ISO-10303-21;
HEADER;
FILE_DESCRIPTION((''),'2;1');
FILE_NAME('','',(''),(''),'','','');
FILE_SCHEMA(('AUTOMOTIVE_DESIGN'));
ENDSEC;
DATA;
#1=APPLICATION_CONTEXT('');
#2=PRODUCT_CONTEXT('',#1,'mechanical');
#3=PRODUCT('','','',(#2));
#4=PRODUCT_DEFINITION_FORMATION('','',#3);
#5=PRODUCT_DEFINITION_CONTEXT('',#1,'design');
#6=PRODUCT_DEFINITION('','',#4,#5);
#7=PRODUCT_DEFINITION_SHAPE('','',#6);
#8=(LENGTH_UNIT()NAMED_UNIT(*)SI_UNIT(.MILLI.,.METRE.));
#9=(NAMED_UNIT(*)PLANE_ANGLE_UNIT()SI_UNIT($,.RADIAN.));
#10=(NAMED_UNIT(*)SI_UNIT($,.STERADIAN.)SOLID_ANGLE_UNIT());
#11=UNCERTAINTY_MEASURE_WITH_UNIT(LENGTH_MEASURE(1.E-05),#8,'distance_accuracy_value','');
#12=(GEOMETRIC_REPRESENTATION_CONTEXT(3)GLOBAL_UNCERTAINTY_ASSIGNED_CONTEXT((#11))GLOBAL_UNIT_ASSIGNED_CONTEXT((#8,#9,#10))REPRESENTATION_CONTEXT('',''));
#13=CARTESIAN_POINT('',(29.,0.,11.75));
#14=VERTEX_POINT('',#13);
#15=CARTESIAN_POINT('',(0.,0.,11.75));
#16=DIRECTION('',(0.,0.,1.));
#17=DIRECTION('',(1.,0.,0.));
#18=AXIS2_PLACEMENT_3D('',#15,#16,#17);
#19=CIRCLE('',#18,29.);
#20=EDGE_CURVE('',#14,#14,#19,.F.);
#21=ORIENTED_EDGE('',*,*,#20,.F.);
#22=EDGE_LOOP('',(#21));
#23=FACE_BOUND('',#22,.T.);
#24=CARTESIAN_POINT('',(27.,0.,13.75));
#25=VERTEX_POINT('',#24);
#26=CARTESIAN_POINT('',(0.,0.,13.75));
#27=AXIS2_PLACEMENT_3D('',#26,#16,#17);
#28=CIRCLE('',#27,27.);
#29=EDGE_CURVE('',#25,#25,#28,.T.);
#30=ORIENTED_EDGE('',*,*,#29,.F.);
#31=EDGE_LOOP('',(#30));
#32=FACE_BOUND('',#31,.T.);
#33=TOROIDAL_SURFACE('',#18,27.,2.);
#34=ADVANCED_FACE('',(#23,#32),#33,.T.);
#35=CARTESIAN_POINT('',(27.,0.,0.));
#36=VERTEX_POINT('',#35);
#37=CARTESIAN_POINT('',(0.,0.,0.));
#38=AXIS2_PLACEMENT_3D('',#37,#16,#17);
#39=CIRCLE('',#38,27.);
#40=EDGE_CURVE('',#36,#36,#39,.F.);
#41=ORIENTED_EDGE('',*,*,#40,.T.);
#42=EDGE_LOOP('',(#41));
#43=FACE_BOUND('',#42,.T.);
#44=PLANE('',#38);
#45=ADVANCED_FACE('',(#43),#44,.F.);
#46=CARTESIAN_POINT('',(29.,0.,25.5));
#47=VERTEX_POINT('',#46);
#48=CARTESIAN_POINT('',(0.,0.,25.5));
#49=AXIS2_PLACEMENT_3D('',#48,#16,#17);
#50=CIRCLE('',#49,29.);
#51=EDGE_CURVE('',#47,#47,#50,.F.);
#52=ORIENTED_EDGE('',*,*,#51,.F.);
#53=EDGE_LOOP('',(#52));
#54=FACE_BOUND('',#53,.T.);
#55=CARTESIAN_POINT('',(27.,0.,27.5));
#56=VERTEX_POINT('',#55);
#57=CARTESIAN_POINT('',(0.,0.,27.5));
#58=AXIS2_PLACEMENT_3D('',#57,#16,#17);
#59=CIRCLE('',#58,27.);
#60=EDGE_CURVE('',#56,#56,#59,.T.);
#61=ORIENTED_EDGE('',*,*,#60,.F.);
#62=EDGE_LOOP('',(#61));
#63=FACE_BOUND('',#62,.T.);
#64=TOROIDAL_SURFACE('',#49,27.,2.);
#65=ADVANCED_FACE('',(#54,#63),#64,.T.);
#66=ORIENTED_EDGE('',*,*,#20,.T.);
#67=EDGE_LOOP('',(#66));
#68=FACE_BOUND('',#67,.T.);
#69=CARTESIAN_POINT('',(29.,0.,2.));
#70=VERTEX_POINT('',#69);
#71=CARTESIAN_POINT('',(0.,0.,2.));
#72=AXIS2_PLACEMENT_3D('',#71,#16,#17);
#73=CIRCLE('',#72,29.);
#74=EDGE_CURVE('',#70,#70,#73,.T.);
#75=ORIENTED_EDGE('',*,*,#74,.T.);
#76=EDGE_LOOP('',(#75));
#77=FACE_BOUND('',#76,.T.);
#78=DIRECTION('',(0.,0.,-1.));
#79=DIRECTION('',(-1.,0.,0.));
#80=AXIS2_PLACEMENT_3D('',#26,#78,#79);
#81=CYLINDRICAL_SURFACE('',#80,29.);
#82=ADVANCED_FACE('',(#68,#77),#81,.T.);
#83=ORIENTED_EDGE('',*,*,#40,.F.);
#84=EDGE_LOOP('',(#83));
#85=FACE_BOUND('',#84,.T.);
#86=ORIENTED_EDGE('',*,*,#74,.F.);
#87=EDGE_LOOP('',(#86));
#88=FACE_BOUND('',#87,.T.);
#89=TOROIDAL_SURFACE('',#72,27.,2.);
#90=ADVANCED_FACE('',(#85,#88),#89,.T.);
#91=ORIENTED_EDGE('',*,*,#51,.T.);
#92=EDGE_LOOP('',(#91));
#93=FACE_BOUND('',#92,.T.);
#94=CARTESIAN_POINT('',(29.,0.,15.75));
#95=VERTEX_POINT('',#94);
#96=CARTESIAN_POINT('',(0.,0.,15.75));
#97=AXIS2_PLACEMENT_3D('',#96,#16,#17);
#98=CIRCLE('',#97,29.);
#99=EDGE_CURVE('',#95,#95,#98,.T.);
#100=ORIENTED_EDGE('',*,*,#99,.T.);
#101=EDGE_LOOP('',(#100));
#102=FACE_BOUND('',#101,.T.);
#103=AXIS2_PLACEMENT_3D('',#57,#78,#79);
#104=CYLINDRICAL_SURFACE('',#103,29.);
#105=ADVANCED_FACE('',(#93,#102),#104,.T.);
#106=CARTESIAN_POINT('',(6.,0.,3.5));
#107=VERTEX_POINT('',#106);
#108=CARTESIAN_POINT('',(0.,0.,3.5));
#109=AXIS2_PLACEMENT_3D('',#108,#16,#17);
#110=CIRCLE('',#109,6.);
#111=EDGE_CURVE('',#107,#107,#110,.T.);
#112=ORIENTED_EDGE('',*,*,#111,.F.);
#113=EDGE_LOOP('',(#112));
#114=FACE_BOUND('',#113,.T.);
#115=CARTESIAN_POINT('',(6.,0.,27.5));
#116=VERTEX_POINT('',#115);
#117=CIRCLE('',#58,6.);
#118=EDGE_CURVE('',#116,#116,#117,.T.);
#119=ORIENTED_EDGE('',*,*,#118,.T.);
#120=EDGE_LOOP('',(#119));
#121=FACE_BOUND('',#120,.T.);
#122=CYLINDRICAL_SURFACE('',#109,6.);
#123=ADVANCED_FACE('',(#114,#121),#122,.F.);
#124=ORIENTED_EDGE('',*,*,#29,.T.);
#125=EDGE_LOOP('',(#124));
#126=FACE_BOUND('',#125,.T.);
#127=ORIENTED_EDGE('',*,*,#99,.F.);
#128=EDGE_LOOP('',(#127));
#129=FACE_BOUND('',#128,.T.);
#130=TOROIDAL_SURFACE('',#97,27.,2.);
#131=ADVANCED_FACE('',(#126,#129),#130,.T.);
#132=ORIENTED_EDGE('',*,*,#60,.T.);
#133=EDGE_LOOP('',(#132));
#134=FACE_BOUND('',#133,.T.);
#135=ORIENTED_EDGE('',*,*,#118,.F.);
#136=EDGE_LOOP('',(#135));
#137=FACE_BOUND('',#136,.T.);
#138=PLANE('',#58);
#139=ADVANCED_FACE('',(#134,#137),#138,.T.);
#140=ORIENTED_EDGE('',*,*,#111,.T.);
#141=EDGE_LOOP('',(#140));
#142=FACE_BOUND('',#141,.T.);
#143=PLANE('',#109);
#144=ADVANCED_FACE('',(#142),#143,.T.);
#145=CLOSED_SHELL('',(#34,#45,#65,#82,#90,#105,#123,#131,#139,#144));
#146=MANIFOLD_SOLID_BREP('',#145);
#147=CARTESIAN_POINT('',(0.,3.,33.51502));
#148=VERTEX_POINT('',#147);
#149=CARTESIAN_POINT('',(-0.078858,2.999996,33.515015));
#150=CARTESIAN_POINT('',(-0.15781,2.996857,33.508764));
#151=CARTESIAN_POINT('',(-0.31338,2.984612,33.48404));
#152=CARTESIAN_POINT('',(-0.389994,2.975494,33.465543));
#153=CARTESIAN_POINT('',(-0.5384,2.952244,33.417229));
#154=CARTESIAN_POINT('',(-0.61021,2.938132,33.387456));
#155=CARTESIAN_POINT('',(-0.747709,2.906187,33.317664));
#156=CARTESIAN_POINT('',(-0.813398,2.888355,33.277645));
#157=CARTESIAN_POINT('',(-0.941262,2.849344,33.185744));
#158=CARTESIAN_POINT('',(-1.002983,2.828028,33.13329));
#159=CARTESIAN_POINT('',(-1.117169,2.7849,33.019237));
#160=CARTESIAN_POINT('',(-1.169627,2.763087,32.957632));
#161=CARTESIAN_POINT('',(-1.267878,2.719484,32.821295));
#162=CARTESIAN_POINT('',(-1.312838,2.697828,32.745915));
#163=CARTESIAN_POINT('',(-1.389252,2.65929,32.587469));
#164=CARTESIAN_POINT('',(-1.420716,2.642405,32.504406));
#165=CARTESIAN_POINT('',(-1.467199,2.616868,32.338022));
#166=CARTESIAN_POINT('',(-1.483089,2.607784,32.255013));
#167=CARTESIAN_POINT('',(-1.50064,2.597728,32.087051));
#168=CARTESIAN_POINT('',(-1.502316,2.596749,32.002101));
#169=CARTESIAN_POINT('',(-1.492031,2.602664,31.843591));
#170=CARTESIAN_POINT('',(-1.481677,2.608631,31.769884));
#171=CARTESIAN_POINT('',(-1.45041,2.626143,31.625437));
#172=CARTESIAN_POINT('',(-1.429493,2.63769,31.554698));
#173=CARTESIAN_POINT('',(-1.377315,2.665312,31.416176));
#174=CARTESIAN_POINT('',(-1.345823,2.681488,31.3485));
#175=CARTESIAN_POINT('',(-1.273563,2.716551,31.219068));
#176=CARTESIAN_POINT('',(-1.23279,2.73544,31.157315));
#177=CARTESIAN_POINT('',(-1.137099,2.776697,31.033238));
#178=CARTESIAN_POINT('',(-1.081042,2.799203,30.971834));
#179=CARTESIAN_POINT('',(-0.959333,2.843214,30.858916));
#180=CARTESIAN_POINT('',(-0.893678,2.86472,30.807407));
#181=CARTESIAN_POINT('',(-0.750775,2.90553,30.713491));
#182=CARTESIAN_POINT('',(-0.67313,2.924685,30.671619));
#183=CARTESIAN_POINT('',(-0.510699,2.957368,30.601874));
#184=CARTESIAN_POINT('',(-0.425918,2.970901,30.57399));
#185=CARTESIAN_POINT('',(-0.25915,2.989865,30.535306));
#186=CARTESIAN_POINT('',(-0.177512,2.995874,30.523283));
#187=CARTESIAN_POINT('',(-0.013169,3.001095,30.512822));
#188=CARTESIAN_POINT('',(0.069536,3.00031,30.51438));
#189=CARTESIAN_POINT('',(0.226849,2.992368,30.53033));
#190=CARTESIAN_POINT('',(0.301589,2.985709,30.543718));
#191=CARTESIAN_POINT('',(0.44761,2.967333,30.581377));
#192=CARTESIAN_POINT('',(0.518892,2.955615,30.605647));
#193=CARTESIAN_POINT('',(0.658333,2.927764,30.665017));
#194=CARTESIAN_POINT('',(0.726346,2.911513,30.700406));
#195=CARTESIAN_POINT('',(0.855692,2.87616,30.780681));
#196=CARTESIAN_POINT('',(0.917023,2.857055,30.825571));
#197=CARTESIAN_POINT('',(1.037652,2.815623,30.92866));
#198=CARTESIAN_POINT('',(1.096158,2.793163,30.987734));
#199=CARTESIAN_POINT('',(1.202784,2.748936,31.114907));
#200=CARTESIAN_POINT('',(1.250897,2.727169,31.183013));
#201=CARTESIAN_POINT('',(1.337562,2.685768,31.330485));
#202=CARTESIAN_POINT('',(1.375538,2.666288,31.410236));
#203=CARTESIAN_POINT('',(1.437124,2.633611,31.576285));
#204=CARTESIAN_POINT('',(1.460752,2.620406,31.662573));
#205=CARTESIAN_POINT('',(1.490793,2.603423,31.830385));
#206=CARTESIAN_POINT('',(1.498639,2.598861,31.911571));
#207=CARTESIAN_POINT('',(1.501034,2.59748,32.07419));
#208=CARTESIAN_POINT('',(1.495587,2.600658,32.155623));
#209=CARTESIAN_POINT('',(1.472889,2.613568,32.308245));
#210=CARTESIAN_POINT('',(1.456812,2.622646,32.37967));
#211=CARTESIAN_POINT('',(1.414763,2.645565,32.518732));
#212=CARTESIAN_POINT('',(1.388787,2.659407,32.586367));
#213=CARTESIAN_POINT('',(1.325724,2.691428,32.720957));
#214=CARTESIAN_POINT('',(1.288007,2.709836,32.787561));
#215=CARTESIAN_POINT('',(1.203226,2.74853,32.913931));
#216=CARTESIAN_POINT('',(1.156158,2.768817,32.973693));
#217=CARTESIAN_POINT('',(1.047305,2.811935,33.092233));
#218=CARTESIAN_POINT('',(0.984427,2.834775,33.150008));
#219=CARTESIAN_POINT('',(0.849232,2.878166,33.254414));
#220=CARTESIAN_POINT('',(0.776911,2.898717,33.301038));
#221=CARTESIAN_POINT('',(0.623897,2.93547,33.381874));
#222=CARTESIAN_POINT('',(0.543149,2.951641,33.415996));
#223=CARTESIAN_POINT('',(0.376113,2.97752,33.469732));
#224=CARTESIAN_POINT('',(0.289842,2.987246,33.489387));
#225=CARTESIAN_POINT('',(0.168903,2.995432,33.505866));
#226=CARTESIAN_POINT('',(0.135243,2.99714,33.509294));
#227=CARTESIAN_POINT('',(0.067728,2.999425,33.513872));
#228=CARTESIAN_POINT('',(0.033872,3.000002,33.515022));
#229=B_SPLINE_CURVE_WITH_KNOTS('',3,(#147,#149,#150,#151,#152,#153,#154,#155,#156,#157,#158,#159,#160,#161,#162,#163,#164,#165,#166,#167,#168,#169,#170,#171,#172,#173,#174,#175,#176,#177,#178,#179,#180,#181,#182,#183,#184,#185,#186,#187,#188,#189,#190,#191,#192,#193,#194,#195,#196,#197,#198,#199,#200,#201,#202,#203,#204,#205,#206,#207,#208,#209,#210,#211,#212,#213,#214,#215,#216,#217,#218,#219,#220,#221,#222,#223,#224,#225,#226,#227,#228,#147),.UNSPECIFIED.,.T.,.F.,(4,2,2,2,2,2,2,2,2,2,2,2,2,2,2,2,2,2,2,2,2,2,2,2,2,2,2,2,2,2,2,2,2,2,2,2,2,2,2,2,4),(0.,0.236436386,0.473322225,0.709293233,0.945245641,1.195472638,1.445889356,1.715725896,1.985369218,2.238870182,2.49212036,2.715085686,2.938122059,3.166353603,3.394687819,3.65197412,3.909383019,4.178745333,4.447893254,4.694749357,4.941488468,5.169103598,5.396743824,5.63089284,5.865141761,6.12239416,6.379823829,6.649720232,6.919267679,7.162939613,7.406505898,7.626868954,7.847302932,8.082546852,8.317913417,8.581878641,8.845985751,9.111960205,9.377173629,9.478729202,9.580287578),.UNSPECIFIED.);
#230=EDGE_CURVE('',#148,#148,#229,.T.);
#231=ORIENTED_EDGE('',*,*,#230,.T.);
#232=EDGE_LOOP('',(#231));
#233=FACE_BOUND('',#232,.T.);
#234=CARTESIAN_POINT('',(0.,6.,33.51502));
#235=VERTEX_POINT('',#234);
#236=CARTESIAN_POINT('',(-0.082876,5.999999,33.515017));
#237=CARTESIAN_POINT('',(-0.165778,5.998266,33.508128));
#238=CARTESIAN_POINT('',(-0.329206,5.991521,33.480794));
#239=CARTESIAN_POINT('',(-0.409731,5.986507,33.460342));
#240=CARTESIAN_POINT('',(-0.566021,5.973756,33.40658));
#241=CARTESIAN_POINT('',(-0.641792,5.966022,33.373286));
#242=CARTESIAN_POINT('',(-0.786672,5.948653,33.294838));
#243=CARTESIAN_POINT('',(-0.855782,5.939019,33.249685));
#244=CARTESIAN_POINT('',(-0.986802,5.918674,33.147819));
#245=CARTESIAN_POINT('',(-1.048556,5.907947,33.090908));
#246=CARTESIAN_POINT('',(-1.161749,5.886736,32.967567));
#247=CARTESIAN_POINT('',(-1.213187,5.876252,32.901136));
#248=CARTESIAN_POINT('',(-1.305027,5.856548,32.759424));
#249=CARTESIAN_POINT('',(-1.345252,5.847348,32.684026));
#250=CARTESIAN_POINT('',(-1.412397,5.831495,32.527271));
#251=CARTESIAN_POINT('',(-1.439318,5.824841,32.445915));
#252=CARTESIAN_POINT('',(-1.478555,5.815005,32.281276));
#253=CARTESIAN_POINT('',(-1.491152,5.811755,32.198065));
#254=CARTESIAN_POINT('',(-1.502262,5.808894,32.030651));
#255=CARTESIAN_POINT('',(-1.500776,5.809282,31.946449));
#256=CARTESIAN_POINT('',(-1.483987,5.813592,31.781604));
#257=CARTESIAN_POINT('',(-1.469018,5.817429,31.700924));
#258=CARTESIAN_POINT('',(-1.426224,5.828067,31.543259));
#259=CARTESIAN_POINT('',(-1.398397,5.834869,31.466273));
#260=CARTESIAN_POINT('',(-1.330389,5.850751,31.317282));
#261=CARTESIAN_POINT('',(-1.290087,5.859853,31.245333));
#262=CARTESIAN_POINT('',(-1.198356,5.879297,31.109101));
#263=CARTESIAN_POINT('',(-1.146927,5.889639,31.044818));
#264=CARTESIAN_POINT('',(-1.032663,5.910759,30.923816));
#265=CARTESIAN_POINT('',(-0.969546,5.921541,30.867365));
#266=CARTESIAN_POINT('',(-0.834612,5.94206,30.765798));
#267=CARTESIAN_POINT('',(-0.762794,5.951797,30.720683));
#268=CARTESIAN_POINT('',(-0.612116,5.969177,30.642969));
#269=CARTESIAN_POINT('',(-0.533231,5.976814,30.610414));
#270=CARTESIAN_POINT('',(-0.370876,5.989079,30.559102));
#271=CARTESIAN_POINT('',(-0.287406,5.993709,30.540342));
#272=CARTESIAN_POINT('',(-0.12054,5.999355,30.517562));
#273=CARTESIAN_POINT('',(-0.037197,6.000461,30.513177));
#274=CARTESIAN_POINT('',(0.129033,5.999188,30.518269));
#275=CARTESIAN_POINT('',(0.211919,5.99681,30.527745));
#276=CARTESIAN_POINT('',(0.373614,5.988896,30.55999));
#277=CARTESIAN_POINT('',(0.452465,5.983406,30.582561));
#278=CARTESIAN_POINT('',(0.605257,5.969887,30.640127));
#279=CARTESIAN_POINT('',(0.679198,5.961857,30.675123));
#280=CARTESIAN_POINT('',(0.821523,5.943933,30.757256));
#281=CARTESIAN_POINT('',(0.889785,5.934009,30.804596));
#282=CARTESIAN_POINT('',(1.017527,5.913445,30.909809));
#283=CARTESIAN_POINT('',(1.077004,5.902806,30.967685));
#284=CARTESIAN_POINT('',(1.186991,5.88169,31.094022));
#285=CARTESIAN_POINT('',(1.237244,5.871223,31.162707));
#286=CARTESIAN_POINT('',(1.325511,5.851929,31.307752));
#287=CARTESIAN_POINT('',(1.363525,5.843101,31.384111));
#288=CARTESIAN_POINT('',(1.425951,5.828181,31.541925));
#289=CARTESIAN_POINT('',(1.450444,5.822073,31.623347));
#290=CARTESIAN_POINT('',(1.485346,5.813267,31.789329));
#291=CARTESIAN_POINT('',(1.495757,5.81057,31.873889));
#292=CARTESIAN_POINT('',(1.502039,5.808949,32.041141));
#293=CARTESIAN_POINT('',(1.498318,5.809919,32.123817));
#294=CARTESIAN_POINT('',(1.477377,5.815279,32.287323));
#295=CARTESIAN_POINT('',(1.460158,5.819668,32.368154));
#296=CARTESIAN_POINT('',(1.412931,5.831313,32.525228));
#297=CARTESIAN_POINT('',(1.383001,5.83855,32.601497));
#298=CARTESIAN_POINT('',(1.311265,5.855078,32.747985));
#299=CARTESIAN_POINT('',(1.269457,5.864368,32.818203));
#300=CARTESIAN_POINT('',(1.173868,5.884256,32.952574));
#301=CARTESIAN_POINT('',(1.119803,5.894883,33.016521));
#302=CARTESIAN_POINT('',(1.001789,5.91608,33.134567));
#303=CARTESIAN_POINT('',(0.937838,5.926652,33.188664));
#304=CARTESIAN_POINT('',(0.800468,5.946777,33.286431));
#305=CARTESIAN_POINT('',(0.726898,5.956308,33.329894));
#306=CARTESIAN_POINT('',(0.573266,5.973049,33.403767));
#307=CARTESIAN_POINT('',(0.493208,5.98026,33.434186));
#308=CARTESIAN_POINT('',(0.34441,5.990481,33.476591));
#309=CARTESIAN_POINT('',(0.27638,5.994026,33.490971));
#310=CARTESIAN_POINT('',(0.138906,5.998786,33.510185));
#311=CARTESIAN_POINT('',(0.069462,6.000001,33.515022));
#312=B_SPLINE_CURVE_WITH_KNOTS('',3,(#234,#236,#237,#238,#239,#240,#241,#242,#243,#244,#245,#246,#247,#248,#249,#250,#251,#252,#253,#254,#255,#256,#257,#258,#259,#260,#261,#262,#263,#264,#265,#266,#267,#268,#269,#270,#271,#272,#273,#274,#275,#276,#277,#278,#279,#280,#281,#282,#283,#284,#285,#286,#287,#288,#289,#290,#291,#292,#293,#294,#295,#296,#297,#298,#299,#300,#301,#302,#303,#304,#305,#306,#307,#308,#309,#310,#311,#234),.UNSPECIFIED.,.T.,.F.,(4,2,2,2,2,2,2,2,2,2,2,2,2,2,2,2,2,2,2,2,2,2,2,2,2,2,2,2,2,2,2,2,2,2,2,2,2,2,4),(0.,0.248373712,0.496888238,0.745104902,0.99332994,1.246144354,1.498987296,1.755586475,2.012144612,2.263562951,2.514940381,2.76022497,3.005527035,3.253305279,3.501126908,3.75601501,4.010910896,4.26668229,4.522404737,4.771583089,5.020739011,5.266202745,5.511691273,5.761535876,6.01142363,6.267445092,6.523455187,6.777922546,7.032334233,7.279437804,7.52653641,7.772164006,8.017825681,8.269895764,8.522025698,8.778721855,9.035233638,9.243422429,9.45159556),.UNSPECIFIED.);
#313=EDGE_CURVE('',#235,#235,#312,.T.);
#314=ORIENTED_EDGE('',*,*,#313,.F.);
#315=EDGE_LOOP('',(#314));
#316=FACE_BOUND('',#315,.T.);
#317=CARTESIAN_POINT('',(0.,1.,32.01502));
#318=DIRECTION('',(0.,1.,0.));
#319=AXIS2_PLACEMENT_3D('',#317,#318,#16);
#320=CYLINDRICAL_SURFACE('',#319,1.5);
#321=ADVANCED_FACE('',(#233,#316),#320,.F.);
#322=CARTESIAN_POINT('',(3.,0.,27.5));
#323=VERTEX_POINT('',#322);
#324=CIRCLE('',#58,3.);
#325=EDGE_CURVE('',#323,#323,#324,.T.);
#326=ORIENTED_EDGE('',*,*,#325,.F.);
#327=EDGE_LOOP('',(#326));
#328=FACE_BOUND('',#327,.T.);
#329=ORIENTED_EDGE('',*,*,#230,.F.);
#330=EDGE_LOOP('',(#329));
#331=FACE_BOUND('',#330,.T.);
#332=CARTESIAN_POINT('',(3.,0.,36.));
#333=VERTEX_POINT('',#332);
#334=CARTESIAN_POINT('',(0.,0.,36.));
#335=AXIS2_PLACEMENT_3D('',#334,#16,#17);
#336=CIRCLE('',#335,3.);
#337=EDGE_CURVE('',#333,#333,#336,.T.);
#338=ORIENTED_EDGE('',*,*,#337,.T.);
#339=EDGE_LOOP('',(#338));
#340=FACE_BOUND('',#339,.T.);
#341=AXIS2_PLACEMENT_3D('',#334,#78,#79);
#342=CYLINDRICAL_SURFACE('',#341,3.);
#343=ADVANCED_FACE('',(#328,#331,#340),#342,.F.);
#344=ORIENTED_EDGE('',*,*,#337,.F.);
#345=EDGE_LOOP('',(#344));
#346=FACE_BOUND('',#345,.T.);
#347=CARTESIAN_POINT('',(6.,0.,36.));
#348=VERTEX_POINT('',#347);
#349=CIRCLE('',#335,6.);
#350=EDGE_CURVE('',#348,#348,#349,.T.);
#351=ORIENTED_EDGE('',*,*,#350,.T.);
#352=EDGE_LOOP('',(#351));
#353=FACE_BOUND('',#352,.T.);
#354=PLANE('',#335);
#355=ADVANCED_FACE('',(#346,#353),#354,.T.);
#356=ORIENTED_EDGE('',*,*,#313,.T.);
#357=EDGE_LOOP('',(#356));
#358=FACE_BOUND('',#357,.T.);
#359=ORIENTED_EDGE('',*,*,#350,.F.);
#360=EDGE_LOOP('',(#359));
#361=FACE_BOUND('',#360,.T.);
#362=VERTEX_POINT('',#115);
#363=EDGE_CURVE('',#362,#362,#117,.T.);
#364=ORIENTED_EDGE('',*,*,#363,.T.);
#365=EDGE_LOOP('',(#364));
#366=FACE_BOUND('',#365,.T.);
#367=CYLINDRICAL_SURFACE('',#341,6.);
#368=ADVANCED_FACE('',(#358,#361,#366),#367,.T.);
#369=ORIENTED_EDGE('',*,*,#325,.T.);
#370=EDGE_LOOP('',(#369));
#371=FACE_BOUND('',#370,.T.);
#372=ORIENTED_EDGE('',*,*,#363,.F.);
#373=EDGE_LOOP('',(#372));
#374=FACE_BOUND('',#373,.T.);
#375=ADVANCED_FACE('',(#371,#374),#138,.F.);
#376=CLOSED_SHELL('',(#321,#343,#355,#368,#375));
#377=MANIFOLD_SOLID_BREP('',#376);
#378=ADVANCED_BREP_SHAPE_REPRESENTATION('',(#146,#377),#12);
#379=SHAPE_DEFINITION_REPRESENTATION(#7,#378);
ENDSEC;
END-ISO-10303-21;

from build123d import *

# Parameters (mm, degrees)
SKETCH_1_R          = 29
EXTRUDE_1_DEPTH     = 13.75
FILLET_1_R          = 2
FILLET_2_R          = 2
SKETCH_2_R          = 29
EXTRUDE_2_DEPTH     = 13.75
FILLET_3_R          = 2
SKETCH_4_R          = 6
CUT_EXTRUDE_1_DEPTH = 24
SKETCH_10_R         = 6
SKETCH_10_R_2       = 3
EXTRUDE_3_DEPTH     = 8.5
SKETCH_11_R         = 1.5
CUT_EXTRUDE_2_DEPTH = 5


with BuildPart() as part:
    # 草图1 → 凸台-拉伸1 (new body)
    with BuildSketch(Plane.XY):
        Circle(SKETCH_1_R)
    extrude(amount=EXTRUDE_1_DEPTH)

    # 圆角1
    fillet_1_edges = [part.edges().sort_by_distance(p)[0] for p in [
        (-29, 0, 13.75),
    ]]
    fillet(fillet_1_edges, radius=FILLET_1_R)

    # 圆角2
    fillet_2_edges = [part.edges().sort_by_distance(p)[0] for p in [
        (-29, 0, 0),
    ]]
    fillet(fillet_2_edges, radius=FILLET_2_R)

    # 草图2 → 凸台-拉伸2 (add)
    with BuildSketch(Plane.XY.offset(13.75)):
        Circle(SKETCH_2_R)
    extrude(amount=EXTRUDE_2_DEPTH)

    # 圆角3
    fillet_3_edges = [part.edges().sort_by_distance(p)[0] for p in [
        (-29, 0, 13.75),
        (-29, 0, 27.5),
    ]]
    fillet(fillet_3_edges, radius=FILLET_3_R - 0.0001)  # a hair under: the kernel refuses the full size

    # 草图4 → 切除-拉伸1 (cut)
    with BuildSketch(Plane.XY.offset(27.5)):
        Circle(SKETCH_4_R)
    extrude(amount=-CUT_EXTRUDE_1_DEPTH, mode=Mode.SUBTRACT)


with BuildPart() as body_2:
    # 草图10 → 凸台-拉伸3 (new body)
    with BuildSketch(Plane.XY.offset(27.5)):
        Circle(SKETCH_10_R)
        Circle(SKETCH_10_R_2, mode=Mode.SUBTRACT)
    extrude(amount=EXTRUDE_3_DEPTH)

    # 草图11 → 切除-拉伸2 (cut)
    with BuildSketch(Plane(origin=(0, 6, 0), x_dir=(1, 0, 0), z_dir=(0, 1, 0))):
        with Locations(Location((0, -32.015019556, 0), (0, 0, 270))):
            Circle(SKETCH_11_R)
    extrude(amount=-CUT_EXTRUDE_2_DEPTH, mode=Mode.SUBTRACT)


solid = Compound([part.part, body_2.part])
